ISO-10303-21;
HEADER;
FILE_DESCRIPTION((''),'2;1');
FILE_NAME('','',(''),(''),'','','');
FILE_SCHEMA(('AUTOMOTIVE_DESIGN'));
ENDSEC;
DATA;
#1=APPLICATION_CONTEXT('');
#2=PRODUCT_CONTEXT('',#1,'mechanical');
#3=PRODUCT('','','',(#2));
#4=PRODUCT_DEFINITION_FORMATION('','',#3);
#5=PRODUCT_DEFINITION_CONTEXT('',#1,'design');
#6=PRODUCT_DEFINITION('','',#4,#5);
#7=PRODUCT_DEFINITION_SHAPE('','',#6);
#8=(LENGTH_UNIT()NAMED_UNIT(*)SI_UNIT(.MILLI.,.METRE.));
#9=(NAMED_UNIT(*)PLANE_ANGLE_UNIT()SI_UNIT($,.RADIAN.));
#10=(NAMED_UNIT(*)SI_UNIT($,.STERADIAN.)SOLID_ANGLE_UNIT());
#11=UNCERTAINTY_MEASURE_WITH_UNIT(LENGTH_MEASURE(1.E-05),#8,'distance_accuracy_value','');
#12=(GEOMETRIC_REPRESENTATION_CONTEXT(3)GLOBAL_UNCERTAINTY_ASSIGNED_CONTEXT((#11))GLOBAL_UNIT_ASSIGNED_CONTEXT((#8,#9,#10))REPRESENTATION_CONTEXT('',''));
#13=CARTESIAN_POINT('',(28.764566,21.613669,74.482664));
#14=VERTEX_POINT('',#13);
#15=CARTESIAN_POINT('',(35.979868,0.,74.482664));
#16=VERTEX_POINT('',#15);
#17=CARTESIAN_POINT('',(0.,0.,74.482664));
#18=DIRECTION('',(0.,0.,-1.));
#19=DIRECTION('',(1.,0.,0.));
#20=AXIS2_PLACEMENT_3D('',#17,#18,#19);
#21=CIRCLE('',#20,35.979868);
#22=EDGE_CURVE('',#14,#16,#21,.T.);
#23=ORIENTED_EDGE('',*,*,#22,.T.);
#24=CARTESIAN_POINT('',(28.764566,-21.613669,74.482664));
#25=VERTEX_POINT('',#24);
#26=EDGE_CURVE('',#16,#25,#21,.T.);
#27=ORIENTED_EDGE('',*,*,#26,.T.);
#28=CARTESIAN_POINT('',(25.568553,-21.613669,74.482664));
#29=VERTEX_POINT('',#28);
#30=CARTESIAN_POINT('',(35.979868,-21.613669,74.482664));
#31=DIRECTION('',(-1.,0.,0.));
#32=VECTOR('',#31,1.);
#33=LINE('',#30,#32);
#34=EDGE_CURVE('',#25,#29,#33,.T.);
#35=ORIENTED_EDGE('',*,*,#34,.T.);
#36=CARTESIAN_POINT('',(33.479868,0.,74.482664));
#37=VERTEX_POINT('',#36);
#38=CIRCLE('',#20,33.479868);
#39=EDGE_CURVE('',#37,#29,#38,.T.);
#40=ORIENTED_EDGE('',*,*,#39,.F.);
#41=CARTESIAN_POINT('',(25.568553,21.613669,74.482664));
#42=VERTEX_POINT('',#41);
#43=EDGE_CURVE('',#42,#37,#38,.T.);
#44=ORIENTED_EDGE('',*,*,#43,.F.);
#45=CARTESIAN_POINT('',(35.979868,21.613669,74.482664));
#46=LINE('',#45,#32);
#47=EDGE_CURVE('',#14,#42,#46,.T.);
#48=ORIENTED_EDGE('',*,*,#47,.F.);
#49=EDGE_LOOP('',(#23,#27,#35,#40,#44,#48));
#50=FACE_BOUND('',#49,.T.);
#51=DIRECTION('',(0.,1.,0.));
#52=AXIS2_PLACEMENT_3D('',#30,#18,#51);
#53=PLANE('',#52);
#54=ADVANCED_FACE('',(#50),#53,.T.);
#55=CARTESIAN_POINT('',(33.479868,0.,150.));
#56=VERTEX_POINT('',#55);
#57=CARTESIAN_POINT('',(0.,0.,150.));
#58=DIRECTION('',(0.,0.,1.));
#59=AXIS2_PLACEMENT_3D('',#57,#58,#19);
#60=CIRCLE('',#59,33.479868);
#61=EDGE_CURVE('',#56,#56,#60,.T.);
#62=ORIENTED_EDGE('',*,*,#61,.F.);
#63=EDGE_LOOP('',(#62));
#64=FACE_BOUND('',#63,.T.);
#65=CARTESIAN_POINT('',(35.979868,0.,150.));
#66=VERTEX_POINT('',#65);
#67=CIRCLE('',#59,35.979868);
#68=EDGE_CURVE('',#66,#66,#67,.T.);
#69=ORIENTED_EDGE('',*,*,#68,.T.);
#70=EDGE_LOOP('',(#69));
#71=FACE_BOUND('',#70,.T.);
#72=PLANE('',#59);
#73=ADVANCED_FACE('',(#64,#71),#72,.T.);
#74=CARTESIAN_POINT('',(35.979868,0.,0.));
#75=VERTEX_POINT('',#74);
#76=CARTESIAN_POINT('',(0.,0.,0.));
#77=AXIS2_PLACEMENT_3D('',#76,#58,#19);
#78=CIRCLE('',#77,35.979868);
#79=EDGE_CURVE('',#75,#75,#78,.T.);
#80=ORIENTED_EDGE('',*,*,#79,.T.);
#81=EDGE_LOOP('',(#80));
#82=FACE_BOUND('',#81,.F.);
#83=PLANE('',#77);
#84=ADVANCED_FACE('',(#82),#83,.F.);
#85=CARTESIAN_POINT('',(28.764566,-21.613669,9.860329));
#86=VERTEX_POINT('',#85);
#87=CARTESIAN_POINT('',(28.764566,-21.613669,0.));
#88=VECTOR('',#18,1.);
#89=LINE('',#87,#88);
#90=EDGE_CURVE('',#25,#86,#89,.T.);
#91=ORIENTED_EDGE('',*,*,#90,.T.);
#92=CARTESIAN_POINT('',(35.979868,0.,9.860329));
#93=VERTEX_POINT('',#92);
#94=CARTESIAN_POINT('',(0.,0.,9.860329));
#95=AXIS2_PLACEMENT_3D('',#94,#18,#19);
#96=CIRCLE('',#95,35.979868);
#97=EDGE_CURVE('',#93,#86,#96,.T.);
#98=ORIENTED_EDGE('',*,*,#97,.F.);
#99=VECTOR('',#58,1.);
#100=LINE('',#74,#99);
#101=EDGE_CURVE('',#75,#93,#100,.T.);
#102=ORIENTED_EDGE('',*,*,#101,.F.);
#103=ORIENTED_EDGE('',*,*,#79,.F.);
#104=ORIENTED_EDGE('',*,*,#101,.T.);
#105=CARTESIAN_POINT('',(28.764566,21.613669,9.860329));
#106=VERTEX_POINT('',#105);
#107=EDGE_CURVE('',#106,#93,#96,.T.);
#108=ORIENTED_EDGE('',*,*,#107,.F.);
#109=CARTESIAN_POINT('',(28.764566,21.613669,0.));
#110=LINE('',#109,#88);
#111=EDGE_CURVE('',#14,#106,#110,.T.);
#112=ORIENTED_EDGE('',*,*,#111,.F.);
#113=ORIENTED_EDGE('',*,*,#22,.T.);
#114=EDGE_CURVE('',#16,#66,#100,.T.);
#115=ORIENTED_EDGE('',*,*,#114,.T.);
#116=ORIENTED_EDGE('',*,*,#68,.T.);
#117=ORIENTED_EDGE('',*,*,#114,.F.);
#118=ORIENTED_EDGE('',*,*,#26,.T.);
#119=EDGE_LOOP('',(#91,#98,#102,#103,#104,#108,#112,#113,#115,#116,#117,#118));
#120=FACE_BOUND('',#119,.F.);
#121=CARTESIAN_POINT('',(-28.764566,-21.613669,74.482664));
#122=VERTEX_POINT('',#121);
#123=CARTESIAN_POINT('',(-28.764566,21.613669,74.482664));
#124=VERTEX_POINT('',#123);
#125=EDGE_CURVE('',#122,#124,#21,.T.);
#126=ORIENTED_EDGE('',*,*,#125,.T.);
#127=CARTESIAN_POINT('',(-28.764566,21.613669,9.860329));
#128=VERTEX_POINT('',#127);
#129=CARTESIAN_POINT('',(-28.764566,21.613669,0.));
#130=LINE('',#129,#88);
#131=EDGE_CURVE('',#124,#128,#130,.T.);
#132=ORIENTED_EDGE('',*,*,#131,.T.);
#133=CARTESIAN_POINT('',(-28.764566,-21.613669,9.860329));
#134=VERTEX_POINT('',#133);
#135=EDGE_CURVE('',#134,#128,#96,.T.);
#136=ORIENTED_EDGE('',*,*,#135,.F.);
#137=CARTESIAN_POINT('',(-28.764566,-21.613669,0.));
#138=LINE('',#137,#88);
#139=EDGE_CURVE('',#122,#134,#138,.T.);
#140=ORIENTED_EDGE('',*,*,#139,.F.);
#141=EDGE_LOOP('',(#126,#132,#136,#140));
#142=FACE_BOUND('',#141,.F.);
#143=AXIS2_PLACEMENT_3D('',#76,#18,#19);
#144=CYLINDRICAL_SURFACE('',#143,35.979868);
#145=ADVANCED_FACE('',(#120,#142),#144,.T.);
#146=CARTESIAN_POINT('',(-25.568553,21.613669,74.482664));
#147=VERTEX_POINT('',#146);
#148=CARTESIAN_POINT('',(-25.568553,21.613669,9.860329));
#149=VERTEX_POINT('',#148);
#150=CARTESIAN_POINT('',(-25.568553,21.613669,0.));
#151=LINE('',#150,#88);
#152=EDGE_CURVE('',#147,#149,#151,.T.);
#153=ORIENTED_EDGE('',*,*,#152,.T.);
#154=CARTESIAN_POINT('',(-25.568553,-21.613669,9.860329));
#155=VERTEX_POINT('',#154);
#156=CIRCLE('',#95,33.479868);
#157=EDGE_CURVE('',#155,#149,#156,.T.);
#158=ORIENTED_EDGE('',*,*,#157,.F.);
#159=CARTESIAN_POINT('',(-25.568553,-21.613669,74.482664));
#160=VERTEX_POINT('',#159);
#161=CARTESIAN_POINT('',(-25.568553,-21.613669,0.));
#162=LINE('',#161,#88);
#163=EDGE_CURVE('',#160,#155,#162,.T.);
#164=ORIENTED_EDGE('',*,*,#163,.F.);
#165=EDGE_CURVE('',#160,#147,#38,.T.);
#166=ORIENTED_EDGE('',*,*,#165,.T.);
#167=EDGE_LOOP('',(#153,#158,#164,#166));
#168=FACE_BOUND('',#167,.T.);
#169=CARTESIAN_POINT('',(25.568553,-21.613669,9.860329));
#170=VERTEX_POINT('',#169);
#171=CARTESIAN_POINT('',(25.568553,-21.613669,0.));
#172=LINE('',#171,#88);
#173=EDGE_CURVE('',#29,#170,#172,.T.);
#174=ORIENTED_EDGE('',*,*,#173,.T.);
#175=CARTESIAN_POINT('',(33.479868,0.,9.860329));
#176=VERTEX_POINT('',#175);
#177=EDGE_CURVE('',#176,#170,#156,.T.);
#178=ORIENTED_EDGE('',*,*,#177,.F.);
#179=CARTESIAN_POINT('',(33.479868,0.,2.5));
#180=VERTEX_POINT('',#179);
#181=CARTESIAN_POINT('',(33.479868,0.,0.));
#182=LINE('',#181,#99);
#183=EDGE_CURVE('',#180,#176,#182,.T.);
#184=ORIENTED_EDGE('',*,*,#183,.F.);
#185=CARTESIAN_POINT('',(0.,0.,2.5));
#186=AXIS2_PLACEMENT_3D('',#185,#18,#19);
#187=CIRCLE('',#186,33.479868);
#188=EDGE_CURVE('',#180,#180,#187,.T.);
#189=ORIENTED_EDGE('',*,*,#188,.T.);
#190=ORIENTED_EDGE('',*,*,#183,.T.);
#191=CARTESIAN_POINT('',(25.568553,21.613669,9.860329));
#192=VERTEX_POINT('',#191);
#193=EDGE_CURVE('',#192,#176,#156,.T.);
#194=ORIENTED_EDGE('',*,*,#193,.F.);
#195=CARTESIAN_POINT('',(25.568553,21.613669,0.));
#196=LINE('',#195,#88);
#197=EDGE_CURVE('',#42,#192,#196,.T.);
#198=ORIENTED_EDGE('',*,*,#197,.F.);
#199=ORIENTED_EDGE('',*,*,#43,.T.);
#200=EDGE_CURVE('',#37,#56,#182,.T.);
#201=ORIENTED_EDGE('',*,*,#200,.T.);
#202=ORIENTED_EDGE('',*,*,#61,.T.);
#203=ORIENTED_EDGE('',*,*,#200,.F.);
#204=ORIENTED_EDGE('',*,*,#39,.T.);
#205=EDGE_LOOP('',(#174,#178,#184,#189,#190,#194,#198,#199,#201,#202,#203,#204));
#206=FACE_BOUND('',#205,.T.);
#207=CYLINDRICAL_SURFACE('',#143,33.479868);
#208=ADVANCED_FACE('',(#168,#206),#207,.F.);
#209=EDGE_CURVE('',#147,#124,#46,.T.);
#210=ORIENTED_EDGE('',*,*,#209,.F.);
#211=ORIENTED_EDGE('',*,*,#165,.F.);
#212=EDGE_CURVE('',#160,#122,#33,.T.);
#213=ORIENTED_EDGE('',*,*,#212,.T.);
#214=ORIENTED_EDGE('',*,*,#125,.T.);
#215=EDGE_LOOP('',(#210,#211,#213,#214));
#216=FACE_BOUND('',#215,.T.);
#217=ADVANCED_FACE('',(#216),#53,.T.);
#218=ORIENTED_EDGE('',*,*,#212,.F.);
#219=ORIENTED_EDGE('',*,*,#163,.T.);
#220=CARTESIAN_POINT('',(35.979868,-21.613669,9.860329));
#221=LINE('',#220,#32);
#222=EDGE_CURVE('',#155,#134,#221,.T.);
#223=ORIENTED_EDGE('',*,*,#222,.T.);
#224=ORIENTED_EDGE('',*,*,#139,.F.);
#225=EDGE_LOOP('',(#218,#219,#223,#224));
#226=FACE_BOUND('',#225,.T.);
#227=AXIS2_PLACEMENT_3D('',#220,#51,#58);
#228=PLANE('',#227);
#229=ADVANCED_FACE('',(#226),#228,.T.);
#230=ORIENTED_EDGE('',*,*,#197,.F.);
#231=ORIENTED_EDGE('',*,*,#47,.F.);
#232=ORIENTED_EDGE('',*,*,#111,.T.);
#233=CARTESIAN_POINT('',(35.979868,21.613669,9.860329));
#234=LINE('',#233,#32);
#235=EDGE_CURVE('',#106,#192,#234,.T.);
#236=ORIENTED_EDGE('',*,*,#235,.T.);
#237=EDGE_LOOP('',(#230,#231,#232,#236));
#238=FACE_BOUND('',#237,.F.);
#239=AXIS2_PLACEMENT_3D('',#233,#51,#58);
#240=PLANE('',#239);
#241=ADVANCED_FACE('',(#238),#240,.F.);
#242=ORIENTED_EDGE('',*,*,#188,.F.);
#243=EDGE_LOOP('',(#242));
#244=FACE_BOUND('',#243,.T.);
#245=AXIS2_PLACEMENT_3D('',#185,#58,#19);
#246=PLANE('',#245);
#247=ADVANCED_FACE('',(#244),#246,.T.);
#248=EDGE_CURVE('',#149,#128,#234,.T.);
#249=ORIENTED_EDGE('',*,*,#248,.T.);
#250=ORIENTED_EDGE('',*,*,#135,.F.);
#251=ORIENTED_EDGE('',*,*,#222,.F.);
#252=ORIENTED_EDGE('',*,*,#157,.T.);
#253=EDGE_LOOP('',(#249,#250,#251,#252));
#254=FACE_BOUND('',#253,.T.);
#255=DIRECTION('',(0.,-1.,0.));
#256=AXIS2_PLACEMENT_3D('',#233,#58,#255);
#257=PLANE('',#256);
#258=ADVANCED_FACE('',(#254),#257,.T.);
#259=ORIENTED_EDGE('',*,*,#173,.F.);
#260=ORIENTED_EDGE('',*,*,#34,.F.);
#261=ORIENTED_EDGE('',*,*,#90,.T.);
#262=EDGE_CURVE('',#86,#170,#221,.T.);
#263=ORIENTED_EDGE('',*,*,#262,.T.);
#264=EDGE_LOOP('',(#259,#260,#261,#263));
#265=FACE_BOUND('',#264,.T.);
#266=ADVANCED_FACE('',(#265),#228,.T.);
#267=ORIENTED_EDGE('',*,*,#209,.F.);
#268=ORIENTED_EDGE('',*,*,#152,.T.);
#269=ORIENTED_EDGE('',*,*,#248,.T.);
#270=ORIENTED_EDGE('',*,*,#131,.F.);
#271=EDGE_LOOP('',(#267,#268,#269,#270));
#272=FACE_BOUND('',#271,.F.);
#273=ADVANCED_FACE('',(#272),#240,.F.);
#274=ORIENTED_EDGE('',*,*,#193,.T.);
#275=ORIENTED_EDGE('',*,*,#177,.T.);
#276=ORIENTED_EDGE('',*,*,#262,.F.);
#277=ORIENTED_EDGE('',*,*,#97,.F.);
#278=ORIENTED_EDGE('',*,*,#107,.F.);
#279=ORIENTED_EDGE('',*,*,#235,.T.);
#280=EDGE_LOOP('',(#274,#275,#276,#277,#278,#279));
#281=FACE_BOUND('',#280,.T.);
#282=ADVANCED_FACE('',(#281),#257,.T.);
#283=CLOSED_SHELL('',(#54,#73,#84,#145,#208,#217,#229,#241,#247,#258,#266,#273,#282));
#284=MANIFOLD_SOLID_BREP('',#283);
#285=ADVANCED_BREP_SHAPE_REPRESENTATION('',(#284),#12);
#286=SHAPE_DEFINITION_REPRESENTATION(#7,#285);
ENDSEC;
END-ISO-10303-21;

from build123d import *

# Parameters (mm, degrees)
F0_R     = 35.9798684942
F1_DEPTH = 150
F2_T     = -2.5
F4_W     = 21.6136686504
F4_H     = 64.6223351359
F5_DEPTH = 150


with BuildPart() as f1:
    # F0 (on Top) → F1 (new body)
    with BuildSketch(Plane.XY):
        Circle(F0_R)
    extrude(amount=F1_DEPTH)

    # F2
    f2_openings = [f1.faces().sort_by_distance(p)[0] for p in [
        (0, 0, 150),
    ]]
    offset(amount=F2_T, openings=f2_openings)

    # F4 (on face) → F5 (cut)
    with BuildSketch(Plane(origin=(35.9798684942, 0, 0), x_dir=(0, -1, 0), z_dir=(-1, 0, 0))):
        with Locations((10.8068343252, 42.1714968979)):
            Rectangle(F4_W, F4_H)
        with Locations((-10.8068343252, 42.1714968979)):
            Rectangle(F4_W, F4_H)
    extrude(amount=F5_DEPTH, mode=Mode.SUBTRACT)


solid = f1.part
